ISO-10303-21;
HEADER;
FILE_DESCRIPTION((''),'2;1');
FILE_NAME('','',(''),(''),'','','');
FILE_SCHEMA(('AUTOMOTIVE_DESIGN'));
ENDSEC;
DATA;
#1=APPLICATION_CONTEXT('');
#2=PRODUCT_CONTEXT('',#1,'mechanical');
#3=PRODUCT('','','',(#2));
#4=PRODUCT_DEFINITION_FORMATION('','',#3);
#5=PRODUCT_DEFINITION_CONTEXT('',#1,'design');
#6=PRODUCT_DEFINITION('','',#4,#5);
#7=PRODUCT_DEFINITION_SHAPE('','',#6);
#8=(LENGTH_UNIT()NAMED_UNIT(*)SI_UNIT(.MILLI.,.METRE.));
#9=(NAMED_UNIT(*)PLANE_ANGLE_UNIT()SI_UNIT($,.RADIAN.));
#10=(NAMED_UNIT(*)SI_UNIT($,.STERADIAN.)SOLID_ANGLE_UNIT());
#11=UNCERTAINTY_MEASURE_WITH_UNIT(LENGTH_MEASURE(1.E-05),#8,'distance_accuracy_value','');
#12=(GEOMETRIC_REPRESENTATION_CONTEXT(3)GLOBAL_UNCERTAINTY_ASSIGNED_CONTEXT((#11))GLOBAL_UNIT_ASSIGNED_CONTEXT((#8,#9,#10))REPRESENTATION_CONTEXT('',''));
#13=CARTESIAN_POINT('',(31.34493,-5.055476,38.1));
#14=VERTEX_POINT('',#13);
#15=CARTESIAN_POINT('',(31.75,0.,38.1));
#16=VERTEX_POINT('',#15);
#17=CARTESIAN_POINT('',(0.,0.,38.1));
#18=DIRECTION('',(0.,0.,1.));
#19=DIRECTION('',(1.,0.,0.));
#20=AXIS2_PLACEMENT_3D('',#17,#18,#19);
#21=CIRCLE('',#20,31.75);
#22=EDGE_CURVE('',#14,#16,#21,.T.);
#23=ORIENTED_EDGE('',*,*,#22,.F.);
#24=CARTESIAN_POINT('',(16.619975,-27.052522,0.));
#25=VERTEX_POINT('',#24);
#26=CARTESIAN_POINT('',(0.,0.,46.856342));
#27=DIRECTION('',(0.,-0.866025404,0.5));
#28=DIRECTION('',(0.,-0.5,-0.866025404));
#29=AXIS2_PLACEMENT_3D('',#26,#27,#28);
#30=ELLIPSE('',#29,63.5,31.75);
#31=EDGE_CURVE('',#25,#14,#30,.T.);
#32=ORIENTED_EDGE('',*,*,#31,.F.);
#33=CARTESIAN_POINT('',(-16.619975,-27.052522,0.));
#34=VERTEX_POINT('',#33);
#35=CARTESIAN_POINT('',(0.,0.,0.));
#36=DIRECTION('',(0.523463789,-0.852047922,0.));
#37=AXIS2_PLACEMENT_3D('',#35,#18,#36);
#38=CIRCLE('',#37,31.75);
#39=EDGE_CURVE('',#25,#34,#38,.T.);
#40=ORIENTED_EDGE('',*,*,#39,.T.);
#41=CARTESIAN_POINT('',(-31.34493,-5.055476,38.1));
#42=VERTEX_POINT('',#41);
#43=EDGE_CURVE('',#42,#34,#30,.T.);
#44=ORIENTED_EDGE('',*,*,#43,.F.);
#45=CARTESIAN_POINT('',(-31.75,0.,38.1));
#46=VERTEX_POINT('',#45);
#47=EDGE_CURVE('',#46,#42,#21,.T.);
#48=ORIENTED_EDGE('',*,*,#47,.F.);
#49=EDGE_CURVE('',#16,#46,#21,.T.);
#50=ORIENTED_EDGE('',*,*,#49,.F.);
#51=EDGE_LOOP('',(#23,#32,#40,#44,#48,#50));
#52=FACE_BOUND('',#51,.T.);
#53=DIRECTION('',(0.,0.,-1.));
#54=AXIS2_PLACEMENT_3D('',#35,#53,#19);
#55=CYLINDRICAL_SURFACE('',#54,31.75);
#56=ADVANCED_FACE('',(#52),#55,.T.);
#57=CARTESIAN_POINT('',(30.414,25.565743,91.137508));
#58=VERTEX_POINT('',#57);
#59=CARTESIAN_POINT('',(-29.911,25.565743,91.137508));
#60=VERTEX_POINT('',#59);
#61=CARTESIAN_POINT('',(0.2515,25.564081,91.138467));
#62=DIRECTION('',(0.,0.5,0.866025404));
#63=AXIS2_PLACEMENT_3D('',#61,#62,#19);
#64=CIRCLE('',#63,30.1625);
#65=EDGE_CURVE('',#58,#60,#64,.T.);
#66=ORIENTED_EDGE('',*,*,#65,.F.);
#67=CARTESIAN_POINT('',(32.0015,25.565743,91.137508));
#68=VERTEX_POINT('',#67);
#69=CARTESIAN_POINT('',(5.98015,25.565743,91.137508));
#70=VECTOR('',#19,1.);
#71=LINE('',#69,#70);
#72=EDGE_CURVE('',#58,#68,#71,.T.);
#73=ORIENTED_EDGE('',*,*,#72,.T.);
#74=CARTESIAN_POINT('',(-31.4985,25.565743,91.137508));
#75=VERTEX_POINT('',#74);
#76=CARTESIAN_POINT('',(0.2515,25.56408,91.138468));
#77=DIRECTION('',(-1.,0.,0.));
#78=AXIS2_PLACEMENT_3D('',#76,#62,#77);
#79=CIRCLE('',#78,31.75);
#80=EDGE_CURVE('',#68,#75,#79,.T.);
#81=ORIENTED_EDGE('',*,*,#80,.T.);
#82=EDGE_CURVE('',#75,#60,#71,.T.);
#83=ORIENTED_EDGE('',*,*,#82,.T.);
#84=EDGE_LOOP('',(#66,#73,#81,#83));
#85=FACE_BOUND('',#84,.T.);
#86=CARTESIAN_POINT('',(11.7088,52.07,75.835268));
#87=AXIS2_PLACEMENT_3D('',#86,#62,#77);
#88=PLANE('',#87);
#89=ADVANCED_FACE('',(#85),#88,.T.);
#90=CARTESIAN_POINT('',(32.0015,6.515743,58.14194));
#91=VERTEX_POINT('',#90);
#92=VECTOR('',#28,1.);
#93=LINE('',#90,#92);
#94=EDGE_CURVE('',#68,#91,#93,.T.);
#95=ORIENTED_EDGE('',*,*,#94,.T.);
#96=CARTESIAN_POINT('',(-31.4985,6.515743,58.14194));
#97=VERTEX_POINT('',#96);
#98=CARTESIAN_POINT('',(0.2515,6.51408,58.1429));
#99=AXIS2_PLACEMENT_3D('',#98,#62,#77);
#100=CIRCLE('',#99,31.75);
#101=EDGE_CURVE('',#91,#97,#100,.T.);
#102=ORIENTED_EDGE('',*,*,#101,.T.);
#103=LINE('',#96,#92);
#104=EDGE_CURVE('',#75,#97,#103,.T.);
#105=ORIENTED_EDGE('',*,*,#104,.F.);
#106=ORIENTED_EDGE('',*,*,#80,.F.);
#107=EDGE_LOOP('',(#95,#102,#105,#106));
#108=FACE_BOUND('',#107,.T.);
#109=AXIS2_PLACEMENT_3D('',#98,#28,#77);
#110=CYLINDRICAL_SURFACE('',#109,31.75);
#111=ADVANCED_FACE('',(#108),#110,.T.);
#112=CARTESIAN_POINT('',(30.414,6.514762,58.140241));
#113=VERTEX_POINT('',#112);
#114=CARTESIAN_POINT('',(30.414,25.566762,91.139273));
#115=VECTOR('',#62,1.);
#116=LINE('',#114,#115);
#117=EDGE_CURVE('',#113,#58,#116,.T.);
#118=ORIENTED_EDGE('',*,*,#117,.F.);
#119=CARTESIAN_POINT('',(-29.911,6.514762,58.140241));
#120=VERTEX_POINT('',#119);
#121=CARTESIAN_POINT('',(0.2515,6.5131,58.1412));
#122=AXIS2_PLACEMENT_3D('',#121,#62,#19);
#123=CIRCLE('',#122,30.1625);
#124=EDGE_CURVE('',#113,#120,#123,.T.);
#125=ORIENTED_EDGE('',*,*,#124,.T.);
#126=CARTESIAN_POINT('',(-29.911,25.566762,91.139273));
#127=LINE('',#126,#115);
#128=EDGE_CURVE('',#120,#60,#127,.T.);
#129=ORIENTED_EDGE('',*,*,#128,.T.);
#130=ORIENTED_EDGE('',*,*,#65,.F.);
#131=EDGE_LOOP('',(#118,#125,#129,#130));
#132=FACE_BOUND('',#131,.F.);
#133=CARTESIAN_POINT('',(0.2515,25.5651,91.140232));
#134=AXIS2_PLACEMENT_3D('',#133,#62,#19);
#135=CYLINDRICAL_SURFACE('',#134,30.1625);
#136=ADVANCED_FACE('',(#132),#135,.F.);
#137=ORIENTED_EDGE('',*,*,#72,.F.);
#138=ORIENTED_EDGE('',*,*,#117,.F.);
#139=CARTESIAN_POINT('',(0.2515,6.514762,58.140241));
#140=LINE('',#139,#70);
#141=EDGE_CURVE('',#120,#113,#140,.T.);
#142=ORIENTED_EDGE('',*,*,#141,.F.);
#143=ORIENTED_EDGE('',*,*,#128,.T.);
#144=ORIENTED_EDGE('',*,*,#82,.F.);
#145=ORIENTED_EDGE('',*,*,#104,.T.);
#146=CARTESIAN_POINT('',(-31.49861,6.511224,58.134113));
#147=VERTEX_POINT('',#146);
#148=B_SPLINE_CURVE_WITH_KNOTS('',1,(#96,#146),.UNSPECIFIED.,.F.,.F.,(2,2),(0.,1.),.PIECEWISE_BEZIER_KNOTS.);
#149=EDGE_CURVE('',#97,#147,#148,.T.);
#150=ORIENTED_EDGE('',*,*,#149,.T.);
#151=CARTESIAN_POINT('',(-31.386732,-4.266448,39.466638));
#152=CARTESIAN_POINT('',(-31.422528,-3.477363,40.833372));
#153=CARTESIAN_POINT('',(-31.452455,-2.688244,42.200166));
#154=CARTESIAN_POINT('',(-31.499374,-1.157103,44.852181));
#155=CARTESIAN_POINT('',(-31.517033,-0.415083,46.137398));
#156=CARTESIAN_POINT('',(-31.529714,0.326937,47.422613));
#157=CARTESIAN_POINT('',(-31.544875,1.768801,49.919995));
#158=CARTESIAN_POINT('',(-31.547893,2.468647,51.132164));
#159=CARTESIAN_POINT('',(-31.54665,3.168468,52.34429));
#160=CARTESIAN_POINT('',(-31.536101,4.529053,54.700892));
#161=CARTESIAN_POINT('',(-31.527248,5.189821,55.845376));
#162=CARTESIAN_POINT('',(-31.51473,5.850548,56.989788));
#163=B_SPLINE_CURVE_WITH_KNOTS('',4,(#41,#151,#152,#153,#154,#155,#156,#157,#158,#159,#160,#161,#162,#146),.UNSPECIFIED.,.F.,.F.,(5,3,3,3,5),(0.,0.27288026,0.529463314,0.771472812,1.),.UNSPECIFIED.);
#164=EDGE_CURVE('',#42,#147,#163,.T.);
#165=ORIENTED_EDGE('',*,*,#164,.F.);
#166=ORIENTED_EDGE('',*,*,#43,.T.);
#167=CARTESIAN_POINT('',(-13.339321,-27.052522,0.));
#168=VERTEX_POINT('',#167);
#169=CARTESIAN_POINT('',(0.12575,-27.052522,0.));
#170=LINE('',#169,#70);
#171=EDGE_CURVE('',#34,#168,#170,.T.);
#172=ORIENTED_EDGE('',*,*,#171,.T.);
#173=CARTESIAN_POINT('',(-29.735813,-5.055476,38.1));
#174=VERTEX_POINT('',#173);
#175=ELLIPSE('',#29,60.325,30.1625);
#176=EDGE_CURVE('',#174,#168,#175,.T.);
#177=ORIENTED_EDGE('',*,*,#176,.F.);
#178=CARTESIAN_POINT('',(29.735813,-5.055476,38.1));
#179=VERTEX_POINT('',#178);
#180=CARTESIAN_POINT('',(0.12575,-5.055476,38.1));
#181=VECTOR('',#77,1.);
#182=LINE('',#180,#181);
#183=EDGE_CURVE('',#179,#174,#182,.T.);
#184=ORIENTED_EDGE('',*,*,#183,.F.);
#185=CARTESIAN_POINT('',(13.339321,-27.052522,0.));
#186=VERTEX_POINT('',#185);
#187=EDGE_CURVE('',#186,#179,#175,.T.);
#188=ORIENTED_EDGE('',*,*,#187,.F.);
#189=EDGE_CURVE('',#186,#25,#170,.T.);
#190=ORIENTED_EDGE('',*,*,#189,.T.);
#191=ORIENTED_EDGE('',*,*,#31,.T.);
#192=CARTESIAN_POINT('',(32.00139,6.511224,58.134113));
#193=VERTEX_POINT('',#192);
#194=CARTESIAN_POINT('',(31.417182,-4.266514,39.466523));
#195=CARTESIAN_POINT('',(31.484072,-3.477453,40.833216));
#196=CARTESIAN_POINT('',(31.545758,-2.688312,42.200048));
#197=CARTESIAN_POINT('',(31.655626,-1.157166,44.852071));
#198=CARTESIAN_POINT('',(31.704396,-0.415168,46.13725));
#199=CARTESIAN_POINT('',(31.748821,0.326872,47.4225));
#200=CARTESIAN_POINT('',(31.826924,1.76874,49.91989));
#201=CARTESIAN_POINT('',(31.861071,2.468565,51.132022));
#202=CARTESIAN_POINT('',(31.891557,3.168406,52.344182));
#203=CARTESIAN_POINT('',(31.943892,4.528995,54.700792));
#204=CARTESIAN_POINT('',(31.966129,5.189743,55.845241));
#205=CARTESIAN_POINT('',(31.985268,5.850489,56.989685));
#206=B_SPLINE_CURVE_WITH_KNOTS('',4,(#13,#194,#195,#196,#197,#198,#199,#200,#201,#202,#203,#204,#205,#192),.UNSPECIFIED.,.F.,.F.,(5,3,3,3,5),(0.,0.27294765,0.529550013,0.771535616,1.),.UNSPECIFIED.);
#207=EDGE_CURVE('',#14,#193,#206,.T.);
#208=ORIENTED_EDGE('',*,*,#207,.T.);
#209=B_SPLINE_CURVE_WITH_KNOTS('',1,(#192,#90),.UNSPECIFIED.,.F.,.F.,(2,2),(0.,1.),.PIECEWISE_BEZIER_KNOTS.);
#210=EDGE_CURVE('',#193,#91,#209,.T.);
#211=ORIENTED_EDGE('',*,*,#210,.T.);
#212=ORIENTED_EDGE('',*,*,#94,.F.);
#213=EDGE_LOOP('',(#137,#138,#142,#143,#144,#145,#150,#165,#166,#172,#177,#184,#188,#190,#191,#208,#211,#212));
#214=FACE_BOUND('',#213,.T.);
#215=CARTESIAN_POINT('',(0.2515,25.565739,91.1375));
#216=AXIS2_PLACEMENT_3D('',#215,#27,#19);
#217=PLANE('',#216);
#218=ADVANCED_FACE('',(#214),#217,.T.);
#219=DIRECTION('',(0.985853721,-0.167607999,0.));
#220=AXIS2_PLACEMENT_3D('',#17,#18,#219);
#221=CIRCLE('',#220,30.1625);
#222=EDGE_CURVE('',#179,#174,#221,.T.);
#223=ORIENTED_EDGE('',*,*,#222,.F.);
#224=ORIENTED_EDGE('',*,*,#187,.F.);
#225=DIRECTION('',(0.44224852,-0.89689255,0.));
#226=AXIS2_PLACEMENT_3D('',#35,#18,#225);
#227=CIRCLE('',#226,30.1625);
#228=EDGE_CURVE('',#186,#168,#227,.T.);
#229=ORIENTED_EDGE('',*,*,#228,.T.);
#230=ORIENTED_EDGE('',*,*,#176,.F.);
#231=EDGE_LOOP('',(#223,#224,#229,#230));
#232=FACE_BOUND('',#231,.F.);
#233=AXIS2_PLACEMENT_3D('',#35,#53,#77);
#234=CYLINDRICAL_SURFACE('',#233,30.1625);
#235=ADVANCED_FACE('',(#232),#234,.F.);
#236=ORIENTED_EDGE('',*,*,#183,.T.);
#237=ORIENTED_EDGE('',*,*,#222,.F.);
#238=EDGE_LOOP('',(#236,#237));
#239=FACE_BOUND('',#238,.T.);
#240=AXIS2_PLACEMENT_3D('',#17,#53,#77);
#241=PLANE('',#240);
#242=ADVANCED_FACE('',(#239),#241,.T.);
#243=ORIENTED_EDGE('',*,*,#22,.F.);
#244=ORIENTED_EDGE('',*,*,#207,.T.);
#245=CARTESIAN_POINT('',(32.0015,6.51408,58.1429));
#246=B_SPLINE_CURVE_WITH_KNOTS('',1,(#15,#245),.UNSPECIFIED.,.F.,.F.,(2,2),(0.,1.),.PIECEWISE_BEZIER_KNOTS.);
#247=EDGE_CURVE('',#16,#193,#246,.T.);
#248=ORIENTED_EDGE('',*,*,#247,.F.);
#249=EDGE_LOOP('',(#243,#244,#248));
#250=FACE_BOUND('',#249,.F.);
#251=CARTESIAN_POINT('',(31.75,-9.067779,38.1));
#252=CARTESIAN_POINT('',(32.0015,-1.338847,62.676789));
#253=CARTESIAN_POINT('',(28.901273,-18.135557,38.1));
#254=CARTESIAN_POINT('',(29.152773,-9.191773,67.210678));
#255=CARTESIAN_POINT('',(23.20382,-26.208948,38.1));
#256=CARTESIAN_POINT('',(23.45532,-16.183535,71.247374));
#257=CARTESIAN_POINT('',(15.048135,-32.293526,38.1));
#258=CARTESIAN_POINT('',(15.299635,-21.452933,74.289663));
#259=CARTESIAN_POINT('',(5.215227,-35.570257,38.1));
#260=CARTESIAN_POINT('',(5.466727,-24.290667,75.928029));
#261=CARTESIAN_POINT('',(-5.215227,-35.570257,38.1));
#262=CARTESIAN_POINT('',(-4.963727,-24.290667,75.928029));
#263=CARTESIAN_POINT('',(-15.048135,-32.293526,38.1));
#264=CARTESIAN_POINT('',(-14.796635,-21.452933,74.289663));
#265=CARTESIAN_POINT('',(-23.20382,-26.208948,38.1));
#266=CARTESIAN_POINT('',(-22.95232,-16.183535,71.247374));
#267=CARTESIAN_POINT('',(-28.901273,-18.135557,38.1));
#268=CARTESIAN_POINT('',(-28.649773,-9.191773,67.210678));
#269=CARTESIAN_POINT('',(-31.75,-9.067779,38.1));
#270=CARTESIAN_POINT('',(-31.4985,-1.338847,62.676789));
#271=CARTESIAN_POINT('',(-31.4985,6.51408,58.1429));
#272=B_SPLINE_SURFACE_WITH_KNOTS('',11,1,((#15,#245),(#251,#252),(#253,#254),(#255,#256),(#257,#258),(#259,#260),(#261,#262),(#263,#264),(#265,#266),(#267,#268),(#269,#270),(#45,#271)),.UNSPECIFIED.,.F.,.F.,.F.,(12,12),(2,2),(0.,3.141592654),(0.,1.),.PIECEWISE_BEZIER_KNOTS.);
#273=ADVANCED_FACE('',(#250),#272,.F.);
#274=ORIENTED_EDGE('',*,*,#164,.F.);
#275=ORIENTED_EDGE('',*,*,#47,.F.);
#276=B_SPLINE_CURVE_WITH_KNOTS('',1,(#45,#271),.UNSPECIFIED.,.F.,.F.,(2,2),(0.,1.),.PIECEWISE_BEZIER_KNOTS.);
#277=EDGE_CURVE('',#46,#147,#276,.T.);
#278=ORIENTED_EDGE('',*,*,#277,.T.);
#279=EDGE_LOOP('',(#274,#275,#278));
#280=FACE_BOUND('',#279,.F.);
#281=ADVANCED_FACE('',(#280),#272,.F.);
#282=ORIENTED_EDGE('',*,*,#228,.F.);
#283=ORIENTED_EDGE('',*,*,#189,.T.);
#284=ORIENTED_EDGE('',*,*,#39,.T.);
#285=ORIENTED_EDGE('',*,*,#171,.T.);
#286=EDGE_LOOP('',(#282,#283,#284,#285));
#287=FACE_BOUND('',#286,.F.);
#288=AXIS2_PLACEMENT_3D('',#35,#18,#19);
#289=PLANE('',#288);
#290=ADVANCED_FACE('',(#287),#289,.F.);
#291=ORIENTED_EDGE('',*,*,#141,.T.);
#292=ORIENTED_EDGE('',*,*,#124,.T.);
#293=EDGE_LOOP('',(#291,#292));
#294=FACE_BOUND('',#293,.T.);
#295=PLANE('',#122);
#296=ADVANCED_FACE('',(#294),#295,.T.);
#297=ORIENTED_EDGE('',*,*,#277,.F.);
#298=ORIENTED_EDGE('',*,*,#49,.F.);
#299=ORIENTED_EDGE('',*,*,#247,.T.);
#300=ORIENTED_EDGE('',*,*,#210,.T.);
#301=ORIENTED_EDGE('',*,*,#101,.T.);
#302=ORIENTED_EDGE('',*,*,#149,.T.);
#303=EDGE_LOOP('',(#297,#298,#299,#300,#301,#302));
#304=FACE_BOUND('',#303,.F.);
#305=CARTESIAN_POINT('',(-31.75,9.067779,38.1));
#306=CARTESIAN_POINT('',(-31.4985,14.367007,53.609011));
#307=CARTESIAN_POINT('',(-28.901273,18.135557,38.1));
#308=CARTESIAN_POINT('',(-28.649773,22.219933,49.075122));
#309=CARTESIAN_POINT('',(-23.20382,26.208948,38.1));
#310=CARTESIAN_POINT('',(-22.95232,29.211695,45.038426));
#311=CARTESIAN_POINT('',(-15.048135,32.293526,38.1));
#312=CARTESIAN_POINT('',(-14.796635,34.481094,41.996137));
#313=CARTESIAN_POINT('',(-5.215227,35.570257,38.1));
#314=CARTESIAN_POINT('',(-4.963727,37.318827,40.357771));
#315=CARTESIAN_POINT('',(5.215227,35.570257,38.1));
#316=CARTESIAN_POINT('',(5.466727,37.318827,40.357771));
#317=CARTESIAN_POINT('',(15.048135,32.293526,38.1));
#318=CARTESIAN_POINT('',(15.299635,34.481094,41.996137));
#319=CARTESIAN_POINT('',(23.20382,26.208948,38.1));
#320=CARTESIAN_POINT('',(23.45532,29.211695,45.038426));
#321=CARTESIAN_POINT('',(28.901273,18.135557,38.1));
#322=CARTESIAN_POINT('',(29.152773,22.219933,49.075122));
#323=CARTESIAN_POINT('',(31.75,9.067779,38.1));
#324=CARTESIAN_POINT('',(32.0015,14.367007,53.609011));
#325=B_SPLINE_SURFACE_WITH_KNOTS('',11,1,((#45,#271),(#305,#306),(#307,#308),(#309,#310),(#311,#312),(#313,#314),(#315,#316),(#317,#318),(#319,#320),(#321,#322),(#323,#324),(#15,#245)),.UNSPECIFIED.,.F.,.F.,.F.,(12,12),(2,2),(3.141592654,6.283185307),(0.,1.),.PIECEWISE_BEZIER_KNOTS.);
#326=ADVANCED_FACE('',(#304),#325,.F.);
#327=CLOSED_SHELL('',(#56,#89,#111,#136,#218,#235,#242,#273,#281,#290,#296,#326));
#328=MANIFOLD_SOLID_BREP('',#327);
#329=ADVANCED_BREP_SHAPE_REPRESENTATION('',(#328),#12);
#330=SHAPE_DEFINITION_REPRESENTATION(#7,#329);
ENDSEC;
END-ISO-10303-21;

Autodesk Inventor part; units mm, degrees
ref_plane "YZ Plane" through (0, 0, 0) normal (1, 0, 0) x (0, 1, 0)
sketch "Sketch1" plane through (0, 0, 0) normal (0, 0, 1) x (1, 0, 0)
  circle A0 centre (0, 0) radius 31.75
  dimension "d0" = 63.5
extrude "Extrusion1" add sketch "Sketch1" along normal blind 38.1
sketch "Sketch2" plane through (0, 0, 38.1) normal (0, 0, 1) x (1, 0, 0)
  circle A0 centre (0, 0) radius 31.75 projected
  point P0 (0, 31.75)
ref_plane "Work Plane1" through (0, 31.75, 38.1) normal (0, 1, 0) x (-1, 0, 0)
sketch "Sketch3" plane through (0, 31.75, 38.1) normal (0, 1, 0) x (-1, 0, 0)
  line L0 (-11.7088, 2.54) -> (14.1872, 2.54) construction
  line L1 (31.75, 0) -> (-31.75, 0) projected
  point P0 (0, -38.1)
  dimension "d3" = 2.54
ref_plane "Work Plane3" through (11.7088, 33.02, 42.8397) normal (0, 0.5, 0.8660254) x (-1, 0, 0)
ref_plane "Work Plane2" through (11.7088, 31.75, 40.64) normal (0, 0.5, 0.8660254) x (-1, 0, 0)
sketch "Sketch5" plane through (11.7088, 33.02, 42.8397) normal (0, 0.5, 0.8660254) x (-1, 0, 0)
  circle A0 centre (11.4573, 30.6064) radius 31.75
  line L0 (0.2164, -1.1436) -> (24.8554, -1.1436) construction
  point P0 (11.7088, 7.1763)
  dimension "d15" = 63.5
  dimension "d16" = 31.75
extrude "Extrusion3" add sketch "Sketch5" along normal blind 38.1
loft "Loft1" add section 1 edges at (-31.75, 0, 38.1) section 2 edges at (32.0015, 6.5141, 58.1429)
sketch "Sketch6" plane through (0, 0, 0) normal (0, 0, -1) x (-1, 0, 0)
  circle A0 centre (0, 0) radius 31.75 projected
  circle A1 centre (0, 0) radius 30.1625
  dimension "d23" = 60.325
extrude "Extrusion4" cut sketch "Sketch6" against normal blind 38.1 contours A1
sketch "Sketch7" plane through (0.2515, 25.5641, 91.1385) normal (0, 0.5, 0.8660254) x (1, 0, 0)
  circle A0 centre (0, 0) radius 31.75 projected
  circle A1 centre (0, 0) radius 30.1625
  point P0 (-0.2515, 23.4301)
  dimension "d26" = 60.325
extrude "Extrusion5" cut sketch "Sketch7" against normal blind 38.1 contours A1
sketch "Sketch8" plane through (0.2515, 25.5641, 91.1385) normal (0, 0.5, 0.8660254) x (1, 0, 0)
  circle A0 centre (0, 0) radius 30.1625 projected
  circle A1 centre (0, 0) radius 31.75 projected
  point P0 (-0.2515, 23.4301)
  point P1 (0, -31.75)
ref_plane "Work Plane4" through (0.2515, -1.9323, 107.0135) normal (0, -0.8660254, 0.5) x (1, 0, 0)
sketch "Sketch9" plane through (0.2515, -1.9323, 107.0135) normal (0, -0.8660254, 0.5) x (1, 0, 0)
  line L0 (-48.3779, -109.4634) -> (50.7956, -109.4634)
  line L1 (50.7956, -109.4634) -> (50.7956, 8.7454)
  line L2 (50.7956, 8.7454) -> (-48.3779, 8.7454)
  line L3 (-48.3779, 8.7454) -> (-48.3779, -109.4634)
  point P0 (-0.2515, -91.7103)
extrude "cut" cut sketch "Sketch9" against normal blind 31.75
properties part number "sup-angled" material "PVC-Piping"
